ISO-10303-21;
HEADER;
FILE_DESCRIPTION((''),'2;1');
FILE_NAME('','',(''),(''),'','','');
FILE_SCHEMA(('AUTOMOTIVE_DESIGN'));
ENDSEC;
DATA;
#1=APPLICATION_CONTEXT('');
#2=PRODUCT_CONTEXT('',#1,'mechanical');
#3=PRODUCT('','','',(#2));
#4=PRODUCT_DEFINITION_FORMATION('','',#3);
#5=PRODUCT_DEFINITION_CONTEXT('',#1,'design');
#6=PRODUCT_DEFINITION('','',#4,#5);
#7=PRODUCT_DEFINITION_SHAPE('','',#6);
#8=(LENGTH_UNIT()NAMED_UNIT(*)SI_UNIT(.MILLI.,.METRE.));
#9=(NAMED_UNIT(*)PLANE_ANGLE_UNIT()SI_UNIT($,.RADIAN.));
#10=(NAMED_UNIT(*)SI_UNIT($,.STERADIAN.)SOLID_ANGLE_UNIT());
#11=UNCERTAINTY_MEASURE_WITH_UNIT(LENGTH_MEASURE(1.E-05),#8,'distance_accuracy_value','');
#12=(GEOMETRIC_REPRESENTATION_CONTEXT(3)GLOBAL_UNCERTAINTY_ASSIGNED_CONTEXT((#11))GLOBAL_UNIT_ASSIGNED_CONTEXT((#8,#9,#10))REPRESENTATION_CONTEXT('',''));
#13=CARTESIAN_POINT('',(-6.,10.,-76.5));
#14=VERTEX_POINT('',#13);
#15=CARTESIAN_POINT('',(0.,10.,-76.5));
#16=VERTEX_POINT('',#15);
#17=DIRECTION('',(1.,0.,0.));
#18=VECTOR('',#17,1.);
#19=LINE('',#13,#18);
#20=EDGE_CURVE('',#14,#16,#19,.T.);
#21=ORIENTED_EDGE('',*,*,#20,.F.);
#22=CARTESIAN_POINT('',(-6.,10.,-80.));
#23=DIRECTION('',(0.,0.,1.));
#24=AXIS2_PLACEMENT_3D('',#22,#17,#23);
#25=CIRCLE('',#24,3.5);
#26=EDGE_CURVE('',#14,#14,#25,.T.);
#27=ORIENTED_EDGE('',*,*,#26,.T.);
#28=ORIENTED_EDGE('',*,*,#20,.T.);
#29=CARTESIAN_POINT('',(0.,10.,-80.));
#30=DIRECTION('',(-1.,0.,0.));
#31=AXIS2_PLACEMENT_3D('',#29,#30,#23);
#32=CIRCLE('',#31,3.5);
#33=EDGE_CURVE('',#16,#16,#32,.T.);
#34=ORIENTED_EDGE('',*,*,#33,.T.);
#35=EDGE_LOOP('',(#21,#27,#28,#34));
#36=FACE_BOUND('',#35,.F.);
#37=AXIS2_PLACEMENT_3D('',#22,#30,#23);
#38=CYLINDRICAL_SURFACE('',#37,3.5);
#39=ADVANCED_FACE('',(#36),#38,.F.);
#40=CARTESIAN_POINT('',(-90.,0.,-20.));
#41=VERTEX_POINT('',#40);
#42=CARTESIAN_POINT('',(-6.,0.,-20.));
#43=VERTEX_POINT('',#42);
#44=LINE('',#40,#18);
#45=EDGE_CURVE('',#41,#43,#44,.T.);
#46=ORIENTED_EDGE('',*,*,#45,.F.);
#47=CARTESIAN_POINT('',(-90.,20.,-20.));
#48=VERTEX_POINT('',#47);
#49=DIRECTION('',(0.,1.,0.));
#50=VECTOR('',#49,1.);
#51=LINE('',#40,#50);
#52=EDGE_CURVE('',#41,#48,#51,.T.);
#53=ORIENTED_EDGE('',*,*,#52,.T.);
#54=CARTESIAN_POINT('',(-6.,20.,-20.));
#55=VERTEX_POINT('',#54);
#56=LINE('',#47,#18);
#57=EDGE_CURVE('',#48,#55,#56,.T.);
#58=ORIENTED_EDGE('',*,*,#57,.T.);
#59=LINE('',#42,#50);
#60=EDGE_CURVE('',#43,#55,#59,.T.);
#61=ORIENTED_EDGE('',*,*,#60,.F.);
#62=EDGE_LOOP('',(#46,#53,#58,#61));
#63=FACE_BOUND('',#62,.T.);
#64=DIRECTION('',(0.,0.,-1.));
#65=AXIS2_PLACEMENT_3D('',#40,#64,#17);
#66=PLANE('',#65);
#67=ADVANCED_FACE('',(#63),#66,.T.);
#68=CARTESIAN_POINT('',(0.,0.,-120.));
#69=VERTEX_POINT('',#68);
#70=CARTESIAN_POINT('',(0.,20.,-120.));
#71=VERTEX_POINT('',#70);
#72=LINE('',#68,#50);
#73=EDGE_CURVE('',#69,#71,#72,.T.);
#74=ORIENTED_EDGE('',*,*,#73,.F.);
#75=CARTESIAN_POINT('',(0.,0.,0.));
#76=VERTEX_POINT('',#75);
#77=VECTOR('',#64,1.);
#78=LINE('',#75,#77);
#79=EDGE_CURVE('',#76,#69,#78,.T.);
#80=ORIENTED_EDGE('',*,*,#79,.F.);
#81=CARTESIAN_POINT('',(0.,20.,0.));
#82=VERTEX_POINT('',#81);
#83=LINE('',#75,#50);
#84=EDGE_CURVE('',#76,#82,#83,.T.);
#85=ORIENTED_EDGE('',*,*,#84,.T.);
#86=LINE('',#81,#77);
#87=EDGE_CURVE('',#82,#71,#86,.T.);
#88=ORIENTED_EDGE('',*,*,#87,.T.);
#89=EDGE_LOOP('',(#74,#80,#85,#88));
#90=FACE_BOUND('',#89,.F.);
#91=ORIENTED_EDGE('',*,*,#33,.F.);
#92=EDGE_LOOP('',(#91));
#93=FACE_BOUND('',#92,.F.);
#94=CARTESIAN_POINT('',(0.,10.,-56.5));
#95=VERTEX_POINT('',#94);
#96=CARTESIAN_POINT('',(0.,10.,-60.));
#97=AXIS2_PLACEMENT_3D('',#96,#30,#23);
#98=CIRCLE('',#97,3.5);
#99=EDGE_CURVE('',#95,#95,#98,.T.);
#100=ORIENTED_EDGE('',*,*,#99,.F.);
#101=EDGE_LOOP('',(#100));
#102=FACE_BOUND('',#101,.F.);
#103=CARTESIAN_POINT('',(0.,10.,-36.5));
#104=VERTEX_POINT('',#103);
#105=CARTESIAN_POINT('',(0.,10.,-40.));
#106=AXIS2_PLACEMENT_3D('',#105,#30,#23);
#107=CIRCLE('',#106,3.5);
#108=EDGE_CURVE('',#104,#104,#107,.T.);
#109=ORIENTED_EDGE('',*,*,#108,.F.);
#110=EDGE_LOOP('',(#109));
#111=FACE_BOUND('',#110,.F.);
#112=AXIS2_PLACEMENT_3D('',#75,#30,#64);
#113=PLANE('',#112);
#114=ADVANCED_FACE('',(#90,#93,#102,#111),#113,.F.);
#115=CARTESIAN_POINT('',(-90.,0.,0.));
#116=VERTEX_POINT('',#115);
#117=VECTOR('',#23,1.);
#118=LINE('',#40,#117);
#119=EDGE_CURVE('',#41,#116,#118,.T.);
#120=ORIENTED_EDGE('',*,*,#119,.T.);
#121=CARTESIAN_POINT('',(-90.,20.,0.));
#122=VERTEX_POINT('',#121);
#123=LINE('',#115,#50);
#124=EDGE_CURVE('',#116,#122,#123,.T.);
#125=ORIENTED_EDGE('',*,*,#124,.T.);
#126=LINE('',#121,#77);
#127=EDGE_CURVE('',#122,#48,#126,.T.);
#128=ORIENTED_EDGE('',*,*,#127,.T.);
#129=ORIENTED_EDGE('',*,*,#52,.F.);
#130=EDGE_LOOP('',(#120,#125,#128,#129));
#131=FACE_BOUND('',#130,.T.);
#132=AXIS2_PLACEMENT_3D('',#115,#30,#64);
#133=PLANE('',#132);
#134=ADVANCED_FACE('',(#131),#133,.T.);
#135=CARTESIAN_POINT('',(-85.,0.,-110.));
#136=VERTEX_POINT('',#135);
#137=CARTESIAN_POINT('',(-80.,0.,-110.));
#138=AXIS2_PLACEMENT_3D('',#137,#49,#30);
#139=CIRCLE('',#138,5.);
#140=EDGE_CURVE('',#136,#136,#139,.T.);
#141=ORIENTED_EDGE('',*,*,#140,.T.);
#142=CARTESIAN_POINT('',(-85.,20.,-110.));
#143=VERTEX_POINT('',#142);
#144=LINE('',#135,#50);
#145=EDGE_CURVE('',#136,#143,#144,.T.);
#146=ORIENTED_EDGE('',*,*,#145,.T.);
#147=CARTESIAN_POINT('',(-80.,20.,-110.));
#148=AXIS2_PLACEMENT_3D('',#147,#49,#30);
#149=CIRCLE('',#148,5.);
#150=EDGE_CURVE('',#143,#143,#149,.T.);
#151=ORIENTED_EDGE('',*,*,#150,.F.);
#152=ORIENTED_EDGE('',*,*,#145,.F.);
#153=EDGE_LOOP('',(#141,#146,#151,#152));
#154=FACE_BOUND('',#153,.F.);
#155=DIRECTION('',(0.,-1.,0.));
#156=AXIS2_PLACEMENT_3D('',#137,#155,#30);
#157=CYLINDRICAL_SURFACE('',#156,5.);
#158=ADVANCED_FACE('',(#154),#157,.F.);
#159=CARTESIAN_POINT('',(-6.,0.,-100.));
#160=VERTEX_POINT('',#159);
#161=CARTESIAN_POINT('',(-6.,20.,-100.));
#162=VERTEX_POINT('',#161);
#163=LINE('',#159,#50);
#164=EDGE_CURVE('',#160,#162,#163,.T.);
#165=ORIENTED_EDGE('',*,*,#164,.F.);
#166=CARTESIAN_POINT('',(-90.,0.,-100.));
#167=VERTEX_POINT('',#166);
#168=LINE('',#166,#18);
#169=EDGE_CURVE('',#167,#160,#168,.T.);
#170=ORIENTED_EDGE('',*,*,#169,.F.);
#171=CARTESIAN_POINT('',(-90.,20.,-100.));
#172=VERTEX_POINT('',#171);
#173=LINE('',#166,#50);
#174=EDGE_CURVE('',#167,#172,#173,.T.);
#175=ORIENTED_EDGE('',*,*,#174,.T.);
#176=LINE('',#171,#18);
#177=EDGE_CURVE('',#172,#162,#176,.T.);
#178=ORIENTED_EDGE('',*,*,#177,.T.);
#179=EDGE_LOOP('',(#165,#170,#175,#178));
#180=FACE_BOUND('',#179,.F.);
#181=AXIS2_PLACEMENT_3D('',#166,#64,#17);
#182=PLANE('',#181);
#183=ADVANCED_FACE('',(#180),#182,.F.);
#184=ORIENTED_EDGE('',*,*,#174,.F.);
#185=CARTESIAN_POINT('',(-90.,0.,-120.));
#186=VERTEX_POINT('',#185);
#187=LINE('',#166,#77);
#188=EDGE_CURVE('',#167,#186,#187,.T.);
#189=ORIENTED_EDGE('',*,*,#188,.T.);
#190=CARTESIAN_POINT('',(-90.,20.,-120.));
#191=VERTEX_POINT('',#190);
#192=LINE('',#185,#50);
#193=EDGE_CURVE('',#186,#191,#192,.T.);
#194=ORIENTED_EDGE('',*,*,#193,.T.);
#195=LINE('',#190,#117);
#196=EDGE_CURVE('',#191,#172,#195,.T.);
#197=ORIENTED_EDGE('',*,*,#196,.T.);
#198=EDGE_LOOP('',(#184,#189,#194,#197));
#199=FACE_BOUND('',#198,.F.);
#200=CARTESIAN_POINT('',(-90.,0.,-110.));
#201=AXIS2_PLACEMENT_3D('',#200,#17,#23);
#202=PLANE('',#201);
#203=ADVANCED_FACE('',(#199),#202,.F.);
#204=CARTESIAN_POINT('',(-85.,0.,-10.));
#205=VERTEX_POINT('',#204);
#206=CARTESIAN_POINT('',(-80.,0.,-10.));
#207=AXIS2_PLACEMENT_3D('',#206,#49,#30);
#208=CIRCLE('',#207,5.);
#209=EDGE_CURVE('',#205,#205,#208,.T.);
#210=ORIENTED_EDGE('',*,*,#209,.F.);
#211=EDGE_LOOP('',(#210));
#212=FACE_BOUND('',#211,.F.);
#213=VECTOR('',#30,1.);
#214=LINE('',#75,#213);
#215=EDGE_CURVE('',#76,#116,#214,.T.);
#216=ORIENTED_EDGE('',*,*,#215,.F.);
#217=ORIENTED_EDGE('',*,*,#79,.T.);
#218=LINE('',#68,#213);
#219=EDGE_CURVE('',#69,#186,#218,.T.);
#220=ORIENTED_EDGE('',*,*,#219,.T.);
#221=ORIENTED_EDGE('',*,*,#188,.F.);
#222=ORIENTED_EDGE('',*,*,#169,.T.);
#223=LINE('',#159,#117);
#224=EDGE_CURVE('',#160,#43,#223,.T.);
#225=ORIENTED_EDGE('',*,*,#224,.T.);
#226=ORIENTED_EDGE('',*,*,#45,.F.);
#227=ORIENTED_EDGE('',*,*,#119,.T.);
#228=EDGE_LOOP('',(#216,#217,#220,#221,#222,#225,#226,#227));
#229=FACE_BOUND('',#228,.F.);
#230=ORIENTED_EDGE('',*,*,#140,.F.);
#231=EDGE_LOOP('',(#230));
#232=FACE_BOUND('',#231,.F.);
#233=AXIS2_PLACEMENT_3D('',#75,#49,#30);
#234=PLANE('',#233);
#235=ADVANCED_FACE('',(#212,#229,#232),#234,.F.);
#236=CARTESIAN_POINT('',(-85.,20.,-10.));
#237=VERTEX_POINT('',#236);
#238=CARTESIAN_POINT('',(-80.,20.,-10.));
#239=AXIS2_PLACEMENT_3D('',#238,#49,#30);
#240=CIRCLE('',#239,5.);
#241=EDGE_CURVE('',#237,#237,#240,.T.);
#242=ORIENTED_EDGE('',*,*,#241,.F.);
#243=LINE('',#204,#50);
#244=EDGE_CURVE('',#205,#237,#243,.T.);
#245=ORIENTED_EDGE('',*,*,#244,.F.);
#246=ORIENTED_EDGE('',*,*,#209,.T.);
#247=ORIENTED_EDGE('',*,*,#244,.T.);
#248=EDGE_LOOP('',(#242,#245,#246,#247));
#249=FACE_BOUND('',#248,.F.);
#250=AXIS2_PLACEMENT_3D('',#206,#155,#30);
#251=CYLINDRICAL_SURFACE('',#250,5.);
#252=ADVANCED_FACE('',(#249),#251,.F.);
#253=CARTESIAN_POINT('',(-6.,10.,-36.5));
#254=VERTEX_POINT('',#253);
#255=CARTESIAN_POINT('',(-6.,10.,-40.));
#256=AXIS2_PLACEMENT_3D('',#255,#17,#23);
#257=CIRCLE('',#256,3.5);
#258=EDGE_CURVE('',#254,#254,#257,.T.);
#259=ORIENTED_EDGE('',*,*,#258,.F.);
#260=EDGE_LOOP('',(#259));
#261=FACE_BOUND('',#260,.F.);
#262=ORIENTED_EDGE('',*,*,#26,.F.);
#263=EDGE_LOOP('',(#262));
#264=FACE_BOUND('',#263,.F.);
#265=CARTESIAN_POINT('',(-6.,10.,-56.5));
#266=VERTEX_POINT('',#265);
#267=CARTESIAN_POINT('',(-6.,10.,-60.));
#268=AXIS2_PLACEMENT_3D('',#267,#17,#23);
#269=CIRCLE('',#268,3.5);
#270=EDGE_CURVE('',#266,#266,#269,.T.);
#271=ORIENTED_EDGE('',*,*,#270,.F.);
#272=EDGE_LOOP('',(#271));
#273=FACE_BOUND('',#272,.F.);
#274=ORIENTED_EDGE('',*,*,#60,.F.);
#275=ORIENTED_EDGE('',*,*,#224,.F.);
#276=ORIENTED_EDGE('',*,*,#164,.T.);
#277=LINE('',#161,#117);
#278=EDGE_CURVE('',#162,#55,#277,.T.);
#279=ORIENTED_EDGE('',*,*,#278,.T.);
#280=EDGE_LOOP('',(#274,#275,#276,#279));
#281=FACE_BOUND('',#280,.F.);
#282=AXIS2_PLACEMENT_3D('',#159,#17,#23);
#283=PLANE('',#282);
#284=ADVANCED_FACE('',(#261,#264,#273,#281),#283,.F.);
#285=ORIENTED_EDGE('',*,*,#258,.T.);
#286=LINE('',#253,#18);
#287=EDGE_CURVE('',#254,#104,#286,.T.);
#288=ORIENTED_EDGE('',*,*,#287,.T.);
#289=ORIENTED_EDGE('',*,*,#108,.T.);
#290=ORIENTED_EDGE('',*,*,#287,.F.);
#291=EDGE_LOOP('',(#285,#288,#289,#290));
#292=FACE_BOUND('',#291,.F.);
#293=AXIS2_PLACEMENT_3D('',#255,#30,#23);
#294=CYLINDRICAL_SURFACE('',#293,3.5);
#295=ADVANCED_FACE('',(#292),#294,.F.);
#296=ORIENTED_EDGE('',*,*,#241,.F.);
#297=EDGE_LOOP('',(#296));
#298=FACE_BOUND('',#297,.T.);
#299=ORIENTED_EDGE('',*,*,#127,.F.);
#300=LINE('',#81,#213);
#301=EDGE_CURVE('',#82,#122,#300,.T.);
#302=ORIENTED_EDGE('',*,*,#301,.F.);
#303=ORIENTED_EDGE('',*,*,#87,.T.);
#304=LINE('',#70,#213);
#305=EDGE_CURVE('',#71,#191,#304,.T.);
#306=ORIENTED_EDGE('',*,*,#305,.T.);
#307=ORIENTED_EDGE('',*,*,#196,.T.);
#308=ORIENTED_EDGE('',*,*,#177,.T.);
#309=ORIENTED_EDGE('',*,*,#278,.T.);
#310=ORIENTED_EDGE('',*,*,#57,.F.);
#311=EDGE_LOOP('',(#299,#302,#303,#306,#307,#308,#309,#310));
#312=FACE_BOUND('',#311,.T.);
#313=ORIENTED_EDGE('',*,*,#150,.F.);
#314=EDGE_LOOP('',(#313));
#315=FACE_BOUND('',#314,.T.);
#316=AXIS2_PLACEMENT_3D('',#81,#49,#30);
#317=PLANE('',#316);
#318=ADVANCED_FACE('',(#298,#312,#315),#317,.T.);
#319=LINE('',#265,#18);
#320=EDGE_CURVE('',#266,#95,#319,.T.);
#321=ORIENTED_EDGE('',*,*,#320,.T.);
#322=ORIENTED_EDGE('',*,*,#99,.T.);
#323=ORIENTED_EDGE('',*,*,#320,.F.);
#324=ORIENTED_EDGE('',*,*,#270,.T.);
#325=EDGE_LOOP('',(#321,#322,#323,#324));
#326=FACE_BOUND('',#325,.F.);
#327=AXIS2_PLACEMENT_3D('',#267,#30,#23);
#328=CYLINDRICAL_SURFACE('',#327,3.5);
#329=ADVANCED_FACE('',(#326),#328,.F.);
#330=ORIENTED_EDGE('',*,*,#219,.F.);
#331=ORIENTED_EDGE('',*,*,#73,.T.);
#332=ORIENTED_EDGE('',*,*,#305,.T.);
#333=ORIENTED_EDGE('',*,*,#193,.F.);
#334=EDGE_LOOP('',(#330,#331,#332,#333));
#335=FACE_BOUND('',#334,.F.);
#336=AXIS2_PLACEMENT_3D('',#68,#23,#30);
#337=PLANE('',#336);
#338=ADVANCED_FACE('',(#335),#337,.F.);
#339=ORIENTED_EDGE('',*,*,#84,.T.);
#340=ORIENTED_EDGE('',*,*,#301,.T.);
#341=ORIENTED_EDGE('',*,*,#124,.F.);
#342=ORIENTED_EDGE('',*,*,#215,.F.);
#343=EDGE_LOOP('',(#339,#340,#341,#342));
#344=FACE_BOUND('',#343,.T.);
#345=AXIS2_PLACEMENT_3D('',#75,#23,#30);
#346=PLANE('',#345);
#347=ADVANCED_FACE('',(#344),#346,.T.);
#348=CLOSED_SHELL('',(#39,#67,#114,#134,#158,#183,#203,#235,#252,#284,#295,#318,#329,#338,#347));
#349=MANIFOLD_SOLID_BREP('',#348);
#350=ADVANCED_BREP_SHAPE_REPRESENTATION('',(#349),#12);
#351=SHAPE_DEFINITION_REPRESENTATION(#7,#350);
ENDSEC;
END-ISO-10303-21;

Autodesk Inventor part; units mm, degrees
ref_plane "YZ Plane" through (0, 0, 0) normal (1, 0, 0) x (0, 1, 0)
ref_plane "XZ Plane" through (0, 0, 0) normal (0, 1, 0) x (-1, 0, 0)
ref_plane "XY Plane" through (0, 0, 0) normal (0, 0, 1) x (1, 0, 0)
sketch "Эскиз1" plane through (0, 0, 0) normal (0, 1, 0) x (-1, 0, 0)
  line L0 (0, 0) -> (90, 0)
  line L1 (90, 0) -> (90, -20)
  line L2 (90, -20) -> (6, -20)
  line L3 (0, 0) -> (0, -120)
  line L4 (0, -120) -> (90, -120)
  line L5 (90, -120) -> (90, -100)
  line L6 (90, -100) -> (6, -100)
  line L7 (6, -100) -> (6, -20)
  line L8 (90, 0) -> (90, -10)
  line L9 (90, -10) -> (80, -10)
  line L10 (90, -100) -> (90, -110)
  line L11 (90, -110) -> (80, -110)
  circle A0 centre (80, -10) radius 5
  circle A1 centre (80, -110) radius 5
  dimension "d4" = 90
  dimension "d5" = 20
  dimension "d6" = 84
  dimension "d7" = 120
  dimension "d8" = 20
  dimension "d9" = 10
  dimension "d10" = 10
  dimension "d11" = 10
  dimension "d12" = 10
  dimension "d13" = 10
  dimension "d14" = 10
extrude "Выдавливание1" add sketch "Эскиз1" along normal blind 20
sketch "Эскиз2" plane through (-6, 0, -100) normal (-1, 0, 0) x (0, 0, 1)
  line L0 (80, 0) -> (80, 20) projected
  line L1 (80, 0) -> (80, 10)
  line L2 (80, 10) -> (0, 10)
  line L3 (0, 0) -> (0, 20) projected
  circle A0 centre (40, 10) radius 3.5
  line L4 (40, 10) -> (60, 10)
  circle A1 centre (60, 10) radius 3.5
  line L5 (40, 10) -> (20, 10)
  circle A2 centre (20, 10) radius 3.5
  point P0 (100, 0)
  dimension "d17" = 7
  dimension "d18" = 20
  dimension "d19" = 7
  dimension "d20" = 20
  dimension "d21" = 7
extrude "Выдавливание2" cut sketch "Эскиз2" against normal blind 95.75
properties part number "Скоба для полки"
